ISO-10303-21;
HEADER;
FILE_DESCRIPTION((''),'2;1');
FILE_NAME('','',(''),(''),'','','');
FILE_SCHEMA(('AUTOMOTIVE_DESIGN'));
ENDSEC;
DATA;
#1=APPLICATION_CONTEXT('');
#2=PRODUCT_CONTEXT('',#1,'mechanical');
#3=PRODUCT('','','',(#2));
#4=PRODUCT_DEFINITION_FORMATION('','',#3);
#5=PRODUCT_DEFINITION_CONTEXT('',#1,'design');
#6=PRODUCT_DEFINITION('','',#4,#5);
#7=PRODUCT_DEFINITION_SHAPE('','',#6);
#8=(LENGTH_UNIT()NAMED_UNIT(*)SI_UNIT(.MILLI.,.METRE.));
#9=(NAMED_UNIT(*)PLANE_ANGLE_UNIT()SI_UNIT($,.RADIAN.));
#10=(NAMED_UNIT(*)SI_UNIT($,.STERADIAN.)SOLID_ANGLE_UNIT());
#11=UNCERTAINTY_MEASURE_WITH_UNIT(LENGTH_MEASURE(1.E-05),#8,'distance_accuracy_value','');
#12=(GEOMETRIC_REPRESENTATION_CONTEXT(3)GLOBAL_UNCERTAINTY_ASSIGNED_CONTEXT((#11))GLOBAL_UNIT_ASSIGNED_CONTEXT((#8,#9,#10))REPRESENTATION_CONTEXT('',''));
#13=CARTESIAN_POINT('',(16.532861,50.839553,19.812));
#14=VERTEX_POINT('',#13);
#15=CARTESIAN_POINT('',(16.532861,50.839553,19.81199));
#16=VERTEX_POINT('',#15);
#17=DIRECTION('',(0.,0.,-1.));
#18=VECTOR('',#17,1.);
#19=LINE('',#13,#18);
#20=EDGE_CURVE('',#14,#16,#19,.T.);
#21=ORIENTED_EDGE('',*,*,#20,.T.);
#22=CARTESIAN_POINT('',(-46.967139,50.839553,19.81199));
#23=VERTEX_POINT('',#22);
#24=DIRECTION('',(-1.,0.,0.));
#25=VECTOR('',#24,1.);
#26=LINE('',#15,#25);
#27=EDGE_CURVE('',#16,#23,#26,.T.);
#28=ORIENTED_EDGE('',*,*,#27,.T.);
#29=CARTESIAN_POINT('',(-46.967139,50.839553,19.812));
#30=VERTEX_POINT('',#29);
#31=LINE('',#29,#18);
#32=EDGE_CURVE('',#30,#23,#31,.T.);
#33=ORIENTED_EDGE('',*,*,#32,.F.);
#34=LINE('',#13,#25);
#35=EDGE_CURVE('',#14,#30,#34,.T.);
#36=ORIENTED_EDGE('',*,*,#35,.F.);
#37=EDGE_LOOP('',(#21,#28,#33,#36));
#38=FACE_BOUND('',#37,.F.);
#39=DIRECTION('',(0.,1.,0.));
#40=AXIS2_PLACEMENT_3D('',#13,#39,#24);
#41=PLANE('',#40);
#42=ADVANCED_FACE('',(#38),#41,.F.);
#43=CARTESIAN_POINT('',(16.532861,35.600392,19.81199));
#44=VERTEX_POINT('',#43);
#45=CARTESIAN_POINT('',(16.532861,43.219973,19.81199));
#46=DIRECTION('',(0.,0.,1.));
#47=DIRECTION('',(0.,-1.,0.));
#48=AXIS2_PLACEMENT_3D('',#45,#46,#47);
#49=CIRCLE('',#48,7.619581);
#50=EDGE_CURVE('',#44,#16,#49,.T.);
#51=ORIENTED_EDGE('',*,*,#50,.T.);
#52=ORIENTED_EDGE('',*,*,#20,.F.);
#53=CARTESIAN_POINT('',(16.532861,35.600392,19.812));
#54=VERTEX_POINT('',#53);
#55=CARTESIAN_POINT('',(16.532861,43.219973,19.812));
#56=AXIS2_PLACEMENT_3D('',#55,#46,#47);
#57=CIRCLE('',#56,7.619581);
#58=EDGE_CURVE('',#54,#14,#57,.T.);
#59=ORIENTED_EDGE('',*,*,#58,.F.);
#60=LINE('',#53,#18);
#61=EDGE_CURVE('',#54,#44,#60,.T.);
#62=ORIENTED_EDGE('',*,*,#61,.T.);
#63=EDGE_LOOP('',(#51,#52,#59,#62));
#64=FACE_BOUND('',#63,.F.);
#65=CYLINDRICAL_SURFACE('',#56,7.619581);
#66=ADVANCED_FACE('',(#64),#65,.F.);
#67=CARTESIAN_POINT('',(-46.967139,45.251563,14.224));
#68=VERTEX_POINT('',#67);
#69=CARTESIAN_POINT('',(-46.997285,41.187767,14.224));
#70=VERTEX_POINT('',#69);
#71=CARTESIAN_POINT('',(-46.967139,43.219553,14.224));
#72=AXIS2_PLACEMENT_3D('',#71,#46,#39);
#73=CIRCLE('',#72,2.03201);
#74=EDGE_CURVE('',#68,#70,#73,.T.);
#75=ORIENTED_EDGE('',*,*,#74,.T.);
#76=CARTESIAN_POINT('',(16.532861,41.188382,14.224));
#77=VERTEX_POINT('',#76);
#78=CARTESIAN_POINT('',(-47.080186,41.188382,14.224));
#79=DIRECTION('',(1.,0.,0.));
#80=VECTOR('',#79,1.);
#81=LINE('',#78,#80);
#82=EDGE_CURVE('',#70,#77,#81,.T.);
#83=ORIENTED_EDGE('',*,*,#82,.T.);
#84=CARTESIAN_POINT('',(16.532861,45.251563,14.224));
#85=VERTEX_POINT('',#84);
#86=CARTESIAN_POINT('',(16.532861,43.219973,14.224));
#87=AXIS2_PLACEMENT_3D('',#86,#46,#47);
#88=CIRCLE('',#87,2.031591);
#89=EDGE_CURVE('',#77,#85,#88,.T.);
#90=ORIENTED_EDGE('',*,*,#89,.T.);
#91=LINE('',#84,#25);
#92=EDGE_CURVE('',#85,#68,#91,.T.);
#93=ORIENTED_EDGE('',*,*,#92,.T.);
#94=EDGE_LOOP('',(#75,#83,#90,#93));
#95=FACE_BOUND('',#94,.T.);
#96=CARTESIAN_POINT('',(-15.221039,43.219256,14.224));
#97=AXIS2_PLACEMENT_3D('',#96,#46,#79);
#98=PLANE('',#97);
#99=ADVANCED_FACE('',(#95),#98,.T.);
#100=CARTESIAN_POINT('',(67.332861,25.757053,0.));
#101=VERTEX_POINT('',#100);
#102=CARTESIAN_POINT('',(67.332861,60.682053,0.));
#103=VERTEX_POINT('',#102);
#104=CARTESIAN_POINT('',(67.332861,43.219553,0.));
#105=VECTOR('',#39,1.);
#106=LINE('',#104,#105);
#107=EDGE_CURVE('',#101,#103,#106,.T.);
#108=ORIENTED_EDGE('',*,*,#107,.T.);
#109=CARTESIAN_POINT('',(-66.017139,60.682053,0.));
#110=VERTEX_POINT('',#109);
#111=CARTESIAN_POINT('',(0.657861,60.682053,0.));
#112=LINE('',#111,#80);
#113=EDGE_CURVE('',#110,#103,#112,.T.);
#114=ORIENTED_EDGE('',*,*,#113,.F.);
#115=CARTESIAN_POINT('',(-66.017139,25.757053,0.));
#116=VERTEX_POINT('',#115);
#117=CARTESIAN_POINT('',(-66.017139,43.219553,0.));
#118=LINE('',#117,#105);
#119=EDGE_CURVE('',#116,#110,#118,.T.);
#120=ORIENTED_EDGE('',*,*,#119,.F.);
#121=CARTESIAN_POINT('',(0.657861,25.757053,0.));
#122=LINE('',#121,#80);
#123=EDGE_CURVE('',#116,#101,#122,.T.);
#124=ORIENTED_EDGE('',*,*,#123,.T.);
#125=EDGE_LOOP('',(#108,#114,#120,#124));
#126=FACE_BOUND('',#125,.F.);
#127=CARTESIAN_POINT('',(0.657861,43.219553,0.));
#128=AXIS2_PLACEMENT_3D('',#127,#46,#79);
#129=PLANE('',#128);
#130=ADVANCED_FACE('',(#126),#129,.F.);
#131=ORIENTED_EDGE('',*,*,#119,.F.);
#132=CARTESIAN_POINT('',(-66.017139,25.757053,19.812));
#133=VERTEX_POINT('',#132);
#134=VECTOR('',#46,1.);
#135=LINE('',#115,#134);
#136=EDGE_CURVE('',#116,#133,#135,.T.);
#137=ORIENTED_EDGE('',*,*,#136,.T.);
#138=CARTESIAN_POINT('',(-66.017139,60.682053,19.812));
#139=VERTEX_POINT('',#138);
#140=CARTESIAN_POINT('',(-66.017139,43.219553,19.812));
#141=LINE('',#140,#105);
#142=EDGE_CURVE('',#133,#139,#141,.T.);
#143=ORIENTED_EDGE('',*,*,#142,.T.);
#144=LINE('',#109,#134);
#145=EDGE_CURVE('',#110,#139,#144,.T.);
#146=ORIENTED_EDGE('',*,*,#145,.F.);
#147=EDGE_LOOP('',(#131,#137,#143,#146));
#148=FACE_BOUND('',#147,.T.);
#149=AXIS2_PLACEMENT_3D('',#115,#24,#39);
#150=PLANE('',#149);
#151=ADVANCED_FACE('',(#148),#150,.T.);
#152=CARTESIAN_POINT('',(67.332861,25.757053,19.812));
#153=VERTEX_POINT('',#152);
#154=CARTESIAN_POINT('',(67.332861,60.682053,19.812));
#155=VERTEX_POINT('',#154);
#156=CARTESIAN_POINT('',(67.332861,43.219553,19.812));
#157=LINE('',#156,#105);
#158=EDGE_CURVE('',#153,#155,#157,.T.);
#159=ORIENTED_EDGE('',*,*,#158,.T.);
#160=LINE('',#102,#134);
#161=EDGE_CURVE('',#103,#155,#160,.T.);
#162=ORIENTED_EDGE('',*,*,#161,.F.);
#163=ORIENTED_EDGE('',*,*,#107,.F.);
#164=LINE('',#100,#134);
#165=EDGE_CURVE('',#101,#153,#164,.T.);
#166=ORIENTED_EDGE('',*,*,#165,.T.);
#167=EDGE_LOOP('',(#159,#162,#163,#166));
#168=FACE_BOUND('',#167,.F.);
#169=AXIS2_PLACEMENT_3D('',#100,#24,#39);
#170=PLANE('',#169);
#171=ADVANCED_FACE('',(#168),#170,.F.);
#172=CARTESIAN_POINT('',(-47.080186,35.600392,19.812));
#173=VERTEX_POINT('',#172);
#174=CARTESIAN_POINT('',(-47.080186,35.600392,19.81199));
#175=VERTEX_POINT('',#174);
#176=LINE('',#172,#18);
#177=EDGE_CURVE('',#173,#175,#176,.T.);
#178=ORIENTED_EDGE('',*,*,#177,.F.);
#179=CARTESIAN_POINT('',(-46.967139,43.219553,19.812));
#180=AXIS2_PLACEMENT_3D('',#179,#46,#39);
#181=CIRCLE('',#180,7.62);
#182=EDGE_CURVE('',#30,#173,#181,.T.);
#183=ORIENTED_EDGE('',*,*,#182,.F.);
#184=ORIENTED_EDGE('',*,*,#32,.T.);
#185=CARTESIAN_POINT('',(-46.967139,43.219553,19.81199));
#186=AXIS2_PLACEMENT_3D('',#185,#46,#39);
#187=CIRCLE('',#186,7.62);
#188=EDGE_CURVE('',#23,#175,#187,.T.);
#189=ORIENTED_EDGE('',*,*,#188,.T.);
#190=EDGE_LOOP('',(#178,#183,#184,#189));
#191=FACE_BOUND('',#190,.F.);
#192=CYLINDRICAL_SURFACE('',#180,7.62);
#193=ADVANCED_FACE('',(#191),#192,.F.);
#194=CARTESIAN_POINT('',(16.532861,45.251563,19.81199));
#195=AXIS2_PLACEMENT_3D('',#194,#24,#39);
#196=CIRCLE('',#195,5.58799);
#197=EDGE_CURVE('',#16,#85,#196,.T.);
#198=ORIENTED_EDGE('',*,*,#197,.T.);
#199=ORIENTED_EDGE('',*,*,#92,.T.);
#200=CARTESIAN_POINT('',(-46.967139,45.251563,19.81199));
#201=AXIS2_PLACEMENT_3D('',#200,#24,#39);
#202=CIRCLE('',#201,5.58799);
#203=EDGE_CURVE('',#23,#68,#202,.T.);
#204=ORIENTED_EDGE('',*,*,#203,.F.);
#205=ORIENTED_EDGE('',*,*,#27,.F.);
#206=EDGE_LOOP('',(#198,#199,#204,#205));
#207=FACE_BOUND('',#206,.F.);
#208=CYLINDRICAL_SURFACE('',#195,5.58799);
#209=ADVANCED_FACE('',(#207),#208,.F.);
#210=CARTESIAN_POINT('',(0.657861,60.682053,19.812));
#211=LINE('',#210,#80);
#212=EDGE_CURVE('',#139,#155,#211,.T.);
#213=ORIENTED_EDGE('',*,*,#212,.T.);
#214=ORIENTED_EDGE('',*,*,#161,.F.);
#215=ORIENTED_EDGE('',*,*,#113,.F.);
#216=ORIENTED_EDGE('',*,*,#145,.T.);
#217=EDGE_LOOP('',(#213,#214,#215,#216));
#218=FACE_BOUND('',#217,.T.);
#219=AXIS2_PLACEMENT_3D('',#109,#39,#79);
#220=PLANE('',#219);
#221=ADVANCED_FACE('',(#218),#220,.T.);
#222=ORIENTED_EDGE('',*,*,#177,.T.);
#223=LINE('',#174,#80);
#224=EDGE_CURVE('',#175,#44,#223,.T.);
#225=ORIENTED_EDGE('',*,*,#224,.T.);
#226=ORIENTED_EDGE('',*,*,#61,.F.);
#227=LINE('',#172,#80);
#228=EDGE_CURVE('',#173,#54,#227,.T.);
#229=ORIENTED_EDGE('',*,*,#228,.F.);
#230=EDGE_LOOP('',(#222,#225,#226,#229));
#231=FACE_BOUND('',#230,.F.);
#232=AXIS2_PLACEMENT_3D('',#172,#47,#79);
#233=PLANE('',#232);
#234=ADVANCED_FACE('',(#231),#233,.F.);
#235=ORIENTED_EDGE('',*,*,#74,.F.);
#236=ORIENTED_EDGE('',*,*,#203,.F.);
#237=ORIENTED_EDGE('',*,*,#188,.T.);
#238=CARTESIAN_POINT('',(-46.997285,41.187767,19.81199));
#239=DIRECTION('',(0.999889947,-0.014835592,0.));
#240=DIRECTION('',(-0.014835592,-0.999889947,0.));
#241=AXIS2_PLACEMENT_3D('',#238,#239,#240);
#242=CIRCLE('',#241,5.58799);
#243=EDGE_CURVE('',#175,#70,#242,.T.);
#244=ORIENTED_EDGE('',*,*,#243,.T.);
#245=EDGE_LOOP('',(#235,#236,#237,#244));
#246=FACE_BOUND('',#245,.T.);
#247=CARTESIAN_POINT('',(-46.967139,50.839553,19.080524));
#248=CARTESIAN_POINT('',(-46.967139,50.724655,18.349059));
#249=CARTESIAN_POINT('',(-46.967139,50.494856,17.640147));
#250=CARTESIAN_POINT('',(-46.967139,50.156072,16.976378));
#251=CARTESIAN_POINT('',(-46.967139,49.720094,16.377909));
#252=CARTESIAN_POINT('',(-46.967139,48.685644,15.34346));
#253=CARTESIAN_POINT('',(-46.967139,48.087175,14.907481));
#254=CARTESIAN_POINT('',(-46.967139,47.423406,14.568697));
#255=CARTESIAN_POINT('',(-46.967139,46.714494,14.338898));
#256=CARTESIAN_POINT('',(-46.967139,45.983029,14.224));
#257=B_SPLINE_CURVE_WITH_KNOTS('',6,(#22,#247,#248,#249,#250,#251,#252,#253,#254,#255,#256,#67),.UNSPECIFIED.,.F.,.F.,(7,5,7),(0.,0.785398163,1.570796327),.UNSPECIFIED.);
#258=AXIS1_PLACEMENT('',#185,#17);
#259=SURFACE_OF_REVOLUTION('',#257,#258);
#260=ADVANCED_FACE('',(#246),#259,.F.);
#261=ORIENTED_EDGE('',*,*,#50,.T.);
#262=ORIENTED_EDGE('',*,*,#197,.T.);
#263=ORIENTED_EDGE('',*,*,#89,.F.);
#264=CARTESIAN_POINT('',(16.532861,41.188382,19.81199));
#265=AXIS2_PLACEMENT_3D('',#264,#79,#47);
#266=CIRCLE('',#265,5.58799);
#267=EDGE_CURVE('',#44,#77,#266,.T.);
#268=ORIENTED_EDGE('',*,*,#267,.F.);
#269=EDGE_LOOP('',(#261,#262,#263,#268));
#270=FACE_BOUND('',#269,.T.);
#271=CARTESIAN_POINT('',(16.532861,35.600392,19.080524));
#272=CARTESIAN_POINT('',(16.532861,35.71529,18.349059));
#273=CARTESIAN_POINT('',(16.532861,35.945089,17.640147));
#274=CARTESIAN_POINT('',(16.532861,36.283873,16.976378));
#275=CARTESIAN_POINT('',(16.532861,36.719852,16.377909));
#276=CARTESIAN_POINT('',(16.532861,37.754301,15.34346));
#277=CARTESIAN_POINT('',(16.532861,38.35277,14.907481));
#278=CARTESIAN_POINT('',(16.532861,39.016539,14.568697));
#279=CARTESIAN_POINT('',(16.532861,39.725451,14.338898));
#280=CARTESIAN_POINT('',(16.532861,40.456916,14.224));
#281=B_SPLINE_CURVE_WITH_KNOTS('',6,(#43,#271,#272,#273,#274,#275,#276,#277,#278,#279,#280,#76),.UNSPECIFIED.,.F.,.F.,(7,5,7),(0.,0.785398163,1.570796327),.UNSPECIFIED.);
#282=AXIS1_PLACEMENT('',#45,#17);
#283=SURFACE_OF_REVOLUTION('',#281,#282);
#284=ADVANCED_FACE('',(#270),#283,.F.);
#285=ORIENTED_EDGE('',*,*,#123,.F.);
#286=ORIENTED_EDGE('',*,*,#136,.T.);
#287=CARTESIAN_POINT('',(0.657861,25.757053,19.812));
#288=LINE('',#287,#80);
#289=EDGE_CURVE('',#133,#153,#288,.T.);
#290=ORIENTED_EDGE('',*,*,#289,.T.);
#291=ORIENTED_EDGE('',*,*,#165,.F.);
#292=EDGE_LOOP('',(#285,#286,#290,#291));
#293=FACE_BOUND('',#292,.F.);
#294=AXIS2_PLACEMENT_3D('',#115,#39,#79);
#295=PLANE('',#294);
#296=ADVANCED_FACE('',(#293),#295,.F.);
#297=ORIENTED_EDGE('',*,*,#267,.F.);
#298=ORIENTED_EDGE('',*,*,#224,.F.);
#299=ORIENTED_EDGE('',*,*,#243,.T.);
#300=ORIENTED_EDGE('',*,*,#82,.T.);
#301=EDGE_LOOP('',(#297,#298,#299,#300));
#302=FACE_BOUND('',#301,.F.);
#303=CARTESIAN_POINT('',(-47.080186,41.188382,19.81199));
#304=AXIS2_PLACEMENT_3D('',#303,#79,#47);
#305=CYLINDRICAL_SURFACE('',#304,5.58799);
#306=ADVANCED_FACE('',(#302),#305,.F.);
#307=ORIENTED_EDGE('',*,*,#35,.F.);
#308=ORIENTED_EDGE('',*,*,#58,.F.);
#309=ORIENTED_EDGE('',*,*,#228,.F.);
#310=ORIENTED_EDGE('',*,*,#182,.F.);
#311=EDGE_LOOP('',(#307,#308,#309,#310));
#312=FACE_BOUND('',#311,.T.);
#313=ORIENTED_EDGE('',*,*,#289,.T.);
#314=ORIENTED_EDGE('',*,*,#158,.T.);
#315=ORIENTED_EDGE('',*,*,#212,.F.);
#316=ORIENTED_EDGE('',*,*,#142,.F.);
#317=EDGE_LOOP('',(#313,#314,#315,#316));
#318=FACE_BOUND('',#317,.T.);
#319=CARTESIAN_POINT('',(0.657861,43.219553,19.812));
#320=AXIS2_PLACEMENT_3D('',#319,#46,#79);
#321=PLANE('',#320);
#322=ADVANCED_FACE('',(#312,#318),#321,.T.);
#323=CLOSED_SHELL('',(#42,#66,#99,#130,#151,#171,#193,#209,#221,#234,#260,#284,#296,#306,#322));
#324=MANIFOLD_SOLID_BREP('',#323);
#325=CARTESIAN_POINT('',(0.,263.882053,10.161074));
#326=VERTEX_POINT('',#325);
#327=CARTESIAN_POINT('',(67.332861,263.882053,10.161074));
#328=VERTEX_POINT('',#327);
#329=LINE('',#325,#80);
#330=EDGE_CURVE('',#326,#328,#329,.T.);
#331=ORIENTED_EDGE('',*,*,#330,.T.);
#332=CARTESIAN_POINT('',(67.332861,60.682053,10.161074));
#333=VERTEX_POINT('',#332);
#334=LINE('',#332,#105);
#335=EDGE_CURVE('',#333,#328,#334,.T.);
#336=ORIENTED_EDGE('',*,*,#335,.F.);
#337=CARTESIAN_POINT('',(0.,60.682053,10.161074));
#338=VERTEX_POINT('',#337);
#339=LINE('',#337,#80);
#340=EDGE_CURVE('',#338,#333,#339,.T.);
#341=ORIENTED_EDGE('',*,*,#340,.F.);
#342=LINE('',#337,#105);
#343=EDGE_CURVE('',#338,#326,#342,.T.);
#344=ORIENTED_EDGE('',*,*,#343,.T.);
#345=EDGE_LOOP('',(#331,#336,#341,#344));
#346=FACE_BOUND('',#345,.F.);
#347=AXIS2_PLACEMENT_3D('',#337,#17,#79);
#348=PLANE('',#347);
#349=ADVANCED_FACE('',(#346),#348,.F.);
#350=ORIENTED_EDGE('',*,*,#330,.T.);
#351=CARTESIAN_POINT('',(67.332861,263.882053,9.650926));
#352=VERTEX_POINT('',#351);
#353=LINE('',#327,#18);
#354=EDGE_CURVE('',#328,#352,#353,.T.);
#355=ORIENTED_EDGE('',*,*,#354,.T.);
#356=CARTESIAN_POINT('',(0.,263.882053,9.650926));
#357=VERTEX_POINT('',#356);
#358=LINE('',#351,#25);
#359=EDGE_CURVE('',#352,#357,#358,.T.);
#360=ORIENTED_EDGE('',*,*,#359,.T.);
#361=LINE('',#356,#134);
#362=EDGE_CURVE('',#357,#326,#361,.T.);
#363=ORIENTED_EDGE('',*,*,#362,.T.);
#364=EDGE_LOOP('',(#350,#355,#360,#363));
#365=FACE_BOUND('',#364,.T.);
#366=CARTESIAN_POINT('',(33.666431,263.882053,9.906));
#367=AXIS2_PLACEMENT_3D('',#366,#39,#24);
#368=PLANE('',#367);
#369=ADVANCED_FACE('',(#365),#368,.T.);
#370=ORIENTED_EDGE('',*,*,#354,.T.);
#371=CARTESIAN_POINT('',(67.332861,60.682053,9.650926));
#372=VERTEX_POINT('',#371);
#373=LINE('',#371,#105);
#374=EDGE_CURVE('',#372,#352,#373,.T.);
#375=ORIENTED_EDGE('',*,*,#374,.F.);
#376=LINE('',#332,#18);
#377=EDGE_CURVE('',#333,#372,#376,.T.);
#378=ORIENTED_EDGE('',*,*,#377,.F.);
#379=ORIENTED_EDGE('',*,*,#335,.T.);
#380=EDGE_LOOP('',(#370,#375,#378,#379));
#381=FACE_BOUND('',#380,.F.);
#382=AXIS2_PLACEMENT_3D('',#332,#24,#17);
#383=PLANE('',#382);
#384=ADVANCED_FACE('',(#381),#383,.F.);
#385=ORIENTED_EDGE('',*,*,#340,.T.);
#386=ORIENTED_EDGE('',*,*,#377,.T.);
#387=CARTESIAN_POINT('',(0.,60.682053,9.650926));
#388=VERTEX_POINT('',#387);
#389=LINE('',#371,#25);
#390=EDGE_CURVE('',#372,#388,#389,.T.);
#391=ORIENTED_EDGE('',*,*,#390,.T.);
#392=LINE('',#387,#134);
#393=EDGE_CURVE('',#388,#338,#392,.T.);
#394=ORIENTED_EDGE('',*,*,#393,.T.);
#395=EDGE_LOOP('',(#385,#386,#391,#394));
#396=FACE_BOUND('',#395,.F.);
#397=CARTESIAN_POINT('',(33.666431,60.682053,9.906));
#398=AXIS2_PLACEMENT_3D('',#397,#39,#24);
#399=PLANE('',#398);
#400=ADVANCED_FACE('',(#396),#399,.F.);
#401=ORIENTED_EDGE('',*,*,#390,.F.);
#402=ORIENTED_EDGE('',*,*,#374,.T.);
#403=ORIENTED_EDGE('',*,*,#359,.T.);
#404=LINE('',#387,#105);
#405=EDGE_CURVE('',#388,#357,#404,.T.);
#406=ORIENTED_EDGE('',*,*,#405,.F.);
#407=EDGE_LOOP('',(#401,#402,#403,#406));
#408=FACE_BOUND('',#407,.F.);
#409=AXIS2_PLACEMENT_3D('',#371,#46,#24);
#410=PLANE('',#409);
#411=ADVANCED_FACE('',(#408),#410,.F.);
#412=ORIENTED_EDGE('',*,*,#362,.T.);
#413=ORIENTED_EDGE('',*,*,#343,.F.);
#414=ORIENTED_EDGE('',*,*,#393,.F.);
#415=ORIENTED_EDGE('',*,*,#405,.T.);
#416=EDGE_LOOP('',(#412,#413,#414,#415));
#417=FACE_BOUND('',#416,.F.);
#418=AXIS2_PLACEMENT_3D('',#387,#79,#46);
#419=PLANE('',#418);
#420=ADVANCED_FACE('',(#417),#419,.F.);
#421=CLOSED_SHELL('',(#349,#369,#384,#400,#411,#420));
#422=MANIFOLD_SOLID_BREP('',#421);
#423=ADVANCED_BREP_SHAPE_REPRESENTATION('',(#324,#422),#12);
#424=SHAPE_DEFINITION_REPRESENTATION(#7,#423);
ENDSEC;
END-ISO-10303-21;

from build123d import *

# Parameters (mm, degrees)
F0_W     = 133.35
F0_H     = 34.925
F1_DEPTH = 19.812
F3_DEPTH = 5.588
F5_DEPTH = 203.2
F6_R     = 5.58799


# Not quite as in the source:
# - a fillet or chamfer is up to 0.001 mm smaller than in the source, because OpenCascade refuses the exact size


with BuildPart() as f1:
    # F0 (on Top) → F1 (new body)
    with BuildSketch(Plane.XY):
        with Locations((0.6578612807, 43.2195533067)):
            Rectangle(F0_W, F0_H)
    extrude(amount=F1_DEPTH)

    # F2 (on face) → F3 (cut)
    with BuildSketch(Plane.XY.offset(19.812)):
        with BuildLine():
            ThreePointArc((16.5328612807, 35.600391914), (24.1524419771, 43.2199726103), (16.5328612807, 50.8395533067))
            Line((16.5328612807, 50.8395533067), (-46.9671387193, 50.8395533067))
            ThreePointArc((-46.9671387193, 50.8395533067), (-54.5869290646, 43.276078466), (-47.0801859275, 35.600391914))
            Line((-47.0801859275, 35.600391914), (16.5328612807, 35.600391914))
        make_face()
    extrude(amount=-F3_DEPTH, mode=Mode.SUBTRACT)

    # F6 (radius 5.588 in the source; OpenCascade refuses exactly that, so slightly less here)
    f6_edges = [f1.edges().sort_by_distance(p)[0] for p in [
        (24.152442, 43.219973, 14.224),
        (-15.217139, 50.839553, 14.224),
        (-54.586929, 43.276078, 14.224),
        (-15.273662, 35.600392, 14.224),
    ]]
    fillet(f6_edges, radius=F6_R)


with BuildPart() as f5:
    # F4 (on face) → F5 (new body)
    with BuildSketch(Plane(origin=(0, 60.6820533067, 0), x_dir=(-1, 0, 0), z_dir=(0, 1, 0))):
        Polygon((0, 9.6509261072), (0, 9.906), (0, 10.1556647569), (0, 10.1610738928), (-67.3328612807, 10.1610738928), (-67.3328612807, 9.6509261072), align=None)
    extrude(amount=F5_DEPTH)


solid = Compound([f1.part, f5.part])
